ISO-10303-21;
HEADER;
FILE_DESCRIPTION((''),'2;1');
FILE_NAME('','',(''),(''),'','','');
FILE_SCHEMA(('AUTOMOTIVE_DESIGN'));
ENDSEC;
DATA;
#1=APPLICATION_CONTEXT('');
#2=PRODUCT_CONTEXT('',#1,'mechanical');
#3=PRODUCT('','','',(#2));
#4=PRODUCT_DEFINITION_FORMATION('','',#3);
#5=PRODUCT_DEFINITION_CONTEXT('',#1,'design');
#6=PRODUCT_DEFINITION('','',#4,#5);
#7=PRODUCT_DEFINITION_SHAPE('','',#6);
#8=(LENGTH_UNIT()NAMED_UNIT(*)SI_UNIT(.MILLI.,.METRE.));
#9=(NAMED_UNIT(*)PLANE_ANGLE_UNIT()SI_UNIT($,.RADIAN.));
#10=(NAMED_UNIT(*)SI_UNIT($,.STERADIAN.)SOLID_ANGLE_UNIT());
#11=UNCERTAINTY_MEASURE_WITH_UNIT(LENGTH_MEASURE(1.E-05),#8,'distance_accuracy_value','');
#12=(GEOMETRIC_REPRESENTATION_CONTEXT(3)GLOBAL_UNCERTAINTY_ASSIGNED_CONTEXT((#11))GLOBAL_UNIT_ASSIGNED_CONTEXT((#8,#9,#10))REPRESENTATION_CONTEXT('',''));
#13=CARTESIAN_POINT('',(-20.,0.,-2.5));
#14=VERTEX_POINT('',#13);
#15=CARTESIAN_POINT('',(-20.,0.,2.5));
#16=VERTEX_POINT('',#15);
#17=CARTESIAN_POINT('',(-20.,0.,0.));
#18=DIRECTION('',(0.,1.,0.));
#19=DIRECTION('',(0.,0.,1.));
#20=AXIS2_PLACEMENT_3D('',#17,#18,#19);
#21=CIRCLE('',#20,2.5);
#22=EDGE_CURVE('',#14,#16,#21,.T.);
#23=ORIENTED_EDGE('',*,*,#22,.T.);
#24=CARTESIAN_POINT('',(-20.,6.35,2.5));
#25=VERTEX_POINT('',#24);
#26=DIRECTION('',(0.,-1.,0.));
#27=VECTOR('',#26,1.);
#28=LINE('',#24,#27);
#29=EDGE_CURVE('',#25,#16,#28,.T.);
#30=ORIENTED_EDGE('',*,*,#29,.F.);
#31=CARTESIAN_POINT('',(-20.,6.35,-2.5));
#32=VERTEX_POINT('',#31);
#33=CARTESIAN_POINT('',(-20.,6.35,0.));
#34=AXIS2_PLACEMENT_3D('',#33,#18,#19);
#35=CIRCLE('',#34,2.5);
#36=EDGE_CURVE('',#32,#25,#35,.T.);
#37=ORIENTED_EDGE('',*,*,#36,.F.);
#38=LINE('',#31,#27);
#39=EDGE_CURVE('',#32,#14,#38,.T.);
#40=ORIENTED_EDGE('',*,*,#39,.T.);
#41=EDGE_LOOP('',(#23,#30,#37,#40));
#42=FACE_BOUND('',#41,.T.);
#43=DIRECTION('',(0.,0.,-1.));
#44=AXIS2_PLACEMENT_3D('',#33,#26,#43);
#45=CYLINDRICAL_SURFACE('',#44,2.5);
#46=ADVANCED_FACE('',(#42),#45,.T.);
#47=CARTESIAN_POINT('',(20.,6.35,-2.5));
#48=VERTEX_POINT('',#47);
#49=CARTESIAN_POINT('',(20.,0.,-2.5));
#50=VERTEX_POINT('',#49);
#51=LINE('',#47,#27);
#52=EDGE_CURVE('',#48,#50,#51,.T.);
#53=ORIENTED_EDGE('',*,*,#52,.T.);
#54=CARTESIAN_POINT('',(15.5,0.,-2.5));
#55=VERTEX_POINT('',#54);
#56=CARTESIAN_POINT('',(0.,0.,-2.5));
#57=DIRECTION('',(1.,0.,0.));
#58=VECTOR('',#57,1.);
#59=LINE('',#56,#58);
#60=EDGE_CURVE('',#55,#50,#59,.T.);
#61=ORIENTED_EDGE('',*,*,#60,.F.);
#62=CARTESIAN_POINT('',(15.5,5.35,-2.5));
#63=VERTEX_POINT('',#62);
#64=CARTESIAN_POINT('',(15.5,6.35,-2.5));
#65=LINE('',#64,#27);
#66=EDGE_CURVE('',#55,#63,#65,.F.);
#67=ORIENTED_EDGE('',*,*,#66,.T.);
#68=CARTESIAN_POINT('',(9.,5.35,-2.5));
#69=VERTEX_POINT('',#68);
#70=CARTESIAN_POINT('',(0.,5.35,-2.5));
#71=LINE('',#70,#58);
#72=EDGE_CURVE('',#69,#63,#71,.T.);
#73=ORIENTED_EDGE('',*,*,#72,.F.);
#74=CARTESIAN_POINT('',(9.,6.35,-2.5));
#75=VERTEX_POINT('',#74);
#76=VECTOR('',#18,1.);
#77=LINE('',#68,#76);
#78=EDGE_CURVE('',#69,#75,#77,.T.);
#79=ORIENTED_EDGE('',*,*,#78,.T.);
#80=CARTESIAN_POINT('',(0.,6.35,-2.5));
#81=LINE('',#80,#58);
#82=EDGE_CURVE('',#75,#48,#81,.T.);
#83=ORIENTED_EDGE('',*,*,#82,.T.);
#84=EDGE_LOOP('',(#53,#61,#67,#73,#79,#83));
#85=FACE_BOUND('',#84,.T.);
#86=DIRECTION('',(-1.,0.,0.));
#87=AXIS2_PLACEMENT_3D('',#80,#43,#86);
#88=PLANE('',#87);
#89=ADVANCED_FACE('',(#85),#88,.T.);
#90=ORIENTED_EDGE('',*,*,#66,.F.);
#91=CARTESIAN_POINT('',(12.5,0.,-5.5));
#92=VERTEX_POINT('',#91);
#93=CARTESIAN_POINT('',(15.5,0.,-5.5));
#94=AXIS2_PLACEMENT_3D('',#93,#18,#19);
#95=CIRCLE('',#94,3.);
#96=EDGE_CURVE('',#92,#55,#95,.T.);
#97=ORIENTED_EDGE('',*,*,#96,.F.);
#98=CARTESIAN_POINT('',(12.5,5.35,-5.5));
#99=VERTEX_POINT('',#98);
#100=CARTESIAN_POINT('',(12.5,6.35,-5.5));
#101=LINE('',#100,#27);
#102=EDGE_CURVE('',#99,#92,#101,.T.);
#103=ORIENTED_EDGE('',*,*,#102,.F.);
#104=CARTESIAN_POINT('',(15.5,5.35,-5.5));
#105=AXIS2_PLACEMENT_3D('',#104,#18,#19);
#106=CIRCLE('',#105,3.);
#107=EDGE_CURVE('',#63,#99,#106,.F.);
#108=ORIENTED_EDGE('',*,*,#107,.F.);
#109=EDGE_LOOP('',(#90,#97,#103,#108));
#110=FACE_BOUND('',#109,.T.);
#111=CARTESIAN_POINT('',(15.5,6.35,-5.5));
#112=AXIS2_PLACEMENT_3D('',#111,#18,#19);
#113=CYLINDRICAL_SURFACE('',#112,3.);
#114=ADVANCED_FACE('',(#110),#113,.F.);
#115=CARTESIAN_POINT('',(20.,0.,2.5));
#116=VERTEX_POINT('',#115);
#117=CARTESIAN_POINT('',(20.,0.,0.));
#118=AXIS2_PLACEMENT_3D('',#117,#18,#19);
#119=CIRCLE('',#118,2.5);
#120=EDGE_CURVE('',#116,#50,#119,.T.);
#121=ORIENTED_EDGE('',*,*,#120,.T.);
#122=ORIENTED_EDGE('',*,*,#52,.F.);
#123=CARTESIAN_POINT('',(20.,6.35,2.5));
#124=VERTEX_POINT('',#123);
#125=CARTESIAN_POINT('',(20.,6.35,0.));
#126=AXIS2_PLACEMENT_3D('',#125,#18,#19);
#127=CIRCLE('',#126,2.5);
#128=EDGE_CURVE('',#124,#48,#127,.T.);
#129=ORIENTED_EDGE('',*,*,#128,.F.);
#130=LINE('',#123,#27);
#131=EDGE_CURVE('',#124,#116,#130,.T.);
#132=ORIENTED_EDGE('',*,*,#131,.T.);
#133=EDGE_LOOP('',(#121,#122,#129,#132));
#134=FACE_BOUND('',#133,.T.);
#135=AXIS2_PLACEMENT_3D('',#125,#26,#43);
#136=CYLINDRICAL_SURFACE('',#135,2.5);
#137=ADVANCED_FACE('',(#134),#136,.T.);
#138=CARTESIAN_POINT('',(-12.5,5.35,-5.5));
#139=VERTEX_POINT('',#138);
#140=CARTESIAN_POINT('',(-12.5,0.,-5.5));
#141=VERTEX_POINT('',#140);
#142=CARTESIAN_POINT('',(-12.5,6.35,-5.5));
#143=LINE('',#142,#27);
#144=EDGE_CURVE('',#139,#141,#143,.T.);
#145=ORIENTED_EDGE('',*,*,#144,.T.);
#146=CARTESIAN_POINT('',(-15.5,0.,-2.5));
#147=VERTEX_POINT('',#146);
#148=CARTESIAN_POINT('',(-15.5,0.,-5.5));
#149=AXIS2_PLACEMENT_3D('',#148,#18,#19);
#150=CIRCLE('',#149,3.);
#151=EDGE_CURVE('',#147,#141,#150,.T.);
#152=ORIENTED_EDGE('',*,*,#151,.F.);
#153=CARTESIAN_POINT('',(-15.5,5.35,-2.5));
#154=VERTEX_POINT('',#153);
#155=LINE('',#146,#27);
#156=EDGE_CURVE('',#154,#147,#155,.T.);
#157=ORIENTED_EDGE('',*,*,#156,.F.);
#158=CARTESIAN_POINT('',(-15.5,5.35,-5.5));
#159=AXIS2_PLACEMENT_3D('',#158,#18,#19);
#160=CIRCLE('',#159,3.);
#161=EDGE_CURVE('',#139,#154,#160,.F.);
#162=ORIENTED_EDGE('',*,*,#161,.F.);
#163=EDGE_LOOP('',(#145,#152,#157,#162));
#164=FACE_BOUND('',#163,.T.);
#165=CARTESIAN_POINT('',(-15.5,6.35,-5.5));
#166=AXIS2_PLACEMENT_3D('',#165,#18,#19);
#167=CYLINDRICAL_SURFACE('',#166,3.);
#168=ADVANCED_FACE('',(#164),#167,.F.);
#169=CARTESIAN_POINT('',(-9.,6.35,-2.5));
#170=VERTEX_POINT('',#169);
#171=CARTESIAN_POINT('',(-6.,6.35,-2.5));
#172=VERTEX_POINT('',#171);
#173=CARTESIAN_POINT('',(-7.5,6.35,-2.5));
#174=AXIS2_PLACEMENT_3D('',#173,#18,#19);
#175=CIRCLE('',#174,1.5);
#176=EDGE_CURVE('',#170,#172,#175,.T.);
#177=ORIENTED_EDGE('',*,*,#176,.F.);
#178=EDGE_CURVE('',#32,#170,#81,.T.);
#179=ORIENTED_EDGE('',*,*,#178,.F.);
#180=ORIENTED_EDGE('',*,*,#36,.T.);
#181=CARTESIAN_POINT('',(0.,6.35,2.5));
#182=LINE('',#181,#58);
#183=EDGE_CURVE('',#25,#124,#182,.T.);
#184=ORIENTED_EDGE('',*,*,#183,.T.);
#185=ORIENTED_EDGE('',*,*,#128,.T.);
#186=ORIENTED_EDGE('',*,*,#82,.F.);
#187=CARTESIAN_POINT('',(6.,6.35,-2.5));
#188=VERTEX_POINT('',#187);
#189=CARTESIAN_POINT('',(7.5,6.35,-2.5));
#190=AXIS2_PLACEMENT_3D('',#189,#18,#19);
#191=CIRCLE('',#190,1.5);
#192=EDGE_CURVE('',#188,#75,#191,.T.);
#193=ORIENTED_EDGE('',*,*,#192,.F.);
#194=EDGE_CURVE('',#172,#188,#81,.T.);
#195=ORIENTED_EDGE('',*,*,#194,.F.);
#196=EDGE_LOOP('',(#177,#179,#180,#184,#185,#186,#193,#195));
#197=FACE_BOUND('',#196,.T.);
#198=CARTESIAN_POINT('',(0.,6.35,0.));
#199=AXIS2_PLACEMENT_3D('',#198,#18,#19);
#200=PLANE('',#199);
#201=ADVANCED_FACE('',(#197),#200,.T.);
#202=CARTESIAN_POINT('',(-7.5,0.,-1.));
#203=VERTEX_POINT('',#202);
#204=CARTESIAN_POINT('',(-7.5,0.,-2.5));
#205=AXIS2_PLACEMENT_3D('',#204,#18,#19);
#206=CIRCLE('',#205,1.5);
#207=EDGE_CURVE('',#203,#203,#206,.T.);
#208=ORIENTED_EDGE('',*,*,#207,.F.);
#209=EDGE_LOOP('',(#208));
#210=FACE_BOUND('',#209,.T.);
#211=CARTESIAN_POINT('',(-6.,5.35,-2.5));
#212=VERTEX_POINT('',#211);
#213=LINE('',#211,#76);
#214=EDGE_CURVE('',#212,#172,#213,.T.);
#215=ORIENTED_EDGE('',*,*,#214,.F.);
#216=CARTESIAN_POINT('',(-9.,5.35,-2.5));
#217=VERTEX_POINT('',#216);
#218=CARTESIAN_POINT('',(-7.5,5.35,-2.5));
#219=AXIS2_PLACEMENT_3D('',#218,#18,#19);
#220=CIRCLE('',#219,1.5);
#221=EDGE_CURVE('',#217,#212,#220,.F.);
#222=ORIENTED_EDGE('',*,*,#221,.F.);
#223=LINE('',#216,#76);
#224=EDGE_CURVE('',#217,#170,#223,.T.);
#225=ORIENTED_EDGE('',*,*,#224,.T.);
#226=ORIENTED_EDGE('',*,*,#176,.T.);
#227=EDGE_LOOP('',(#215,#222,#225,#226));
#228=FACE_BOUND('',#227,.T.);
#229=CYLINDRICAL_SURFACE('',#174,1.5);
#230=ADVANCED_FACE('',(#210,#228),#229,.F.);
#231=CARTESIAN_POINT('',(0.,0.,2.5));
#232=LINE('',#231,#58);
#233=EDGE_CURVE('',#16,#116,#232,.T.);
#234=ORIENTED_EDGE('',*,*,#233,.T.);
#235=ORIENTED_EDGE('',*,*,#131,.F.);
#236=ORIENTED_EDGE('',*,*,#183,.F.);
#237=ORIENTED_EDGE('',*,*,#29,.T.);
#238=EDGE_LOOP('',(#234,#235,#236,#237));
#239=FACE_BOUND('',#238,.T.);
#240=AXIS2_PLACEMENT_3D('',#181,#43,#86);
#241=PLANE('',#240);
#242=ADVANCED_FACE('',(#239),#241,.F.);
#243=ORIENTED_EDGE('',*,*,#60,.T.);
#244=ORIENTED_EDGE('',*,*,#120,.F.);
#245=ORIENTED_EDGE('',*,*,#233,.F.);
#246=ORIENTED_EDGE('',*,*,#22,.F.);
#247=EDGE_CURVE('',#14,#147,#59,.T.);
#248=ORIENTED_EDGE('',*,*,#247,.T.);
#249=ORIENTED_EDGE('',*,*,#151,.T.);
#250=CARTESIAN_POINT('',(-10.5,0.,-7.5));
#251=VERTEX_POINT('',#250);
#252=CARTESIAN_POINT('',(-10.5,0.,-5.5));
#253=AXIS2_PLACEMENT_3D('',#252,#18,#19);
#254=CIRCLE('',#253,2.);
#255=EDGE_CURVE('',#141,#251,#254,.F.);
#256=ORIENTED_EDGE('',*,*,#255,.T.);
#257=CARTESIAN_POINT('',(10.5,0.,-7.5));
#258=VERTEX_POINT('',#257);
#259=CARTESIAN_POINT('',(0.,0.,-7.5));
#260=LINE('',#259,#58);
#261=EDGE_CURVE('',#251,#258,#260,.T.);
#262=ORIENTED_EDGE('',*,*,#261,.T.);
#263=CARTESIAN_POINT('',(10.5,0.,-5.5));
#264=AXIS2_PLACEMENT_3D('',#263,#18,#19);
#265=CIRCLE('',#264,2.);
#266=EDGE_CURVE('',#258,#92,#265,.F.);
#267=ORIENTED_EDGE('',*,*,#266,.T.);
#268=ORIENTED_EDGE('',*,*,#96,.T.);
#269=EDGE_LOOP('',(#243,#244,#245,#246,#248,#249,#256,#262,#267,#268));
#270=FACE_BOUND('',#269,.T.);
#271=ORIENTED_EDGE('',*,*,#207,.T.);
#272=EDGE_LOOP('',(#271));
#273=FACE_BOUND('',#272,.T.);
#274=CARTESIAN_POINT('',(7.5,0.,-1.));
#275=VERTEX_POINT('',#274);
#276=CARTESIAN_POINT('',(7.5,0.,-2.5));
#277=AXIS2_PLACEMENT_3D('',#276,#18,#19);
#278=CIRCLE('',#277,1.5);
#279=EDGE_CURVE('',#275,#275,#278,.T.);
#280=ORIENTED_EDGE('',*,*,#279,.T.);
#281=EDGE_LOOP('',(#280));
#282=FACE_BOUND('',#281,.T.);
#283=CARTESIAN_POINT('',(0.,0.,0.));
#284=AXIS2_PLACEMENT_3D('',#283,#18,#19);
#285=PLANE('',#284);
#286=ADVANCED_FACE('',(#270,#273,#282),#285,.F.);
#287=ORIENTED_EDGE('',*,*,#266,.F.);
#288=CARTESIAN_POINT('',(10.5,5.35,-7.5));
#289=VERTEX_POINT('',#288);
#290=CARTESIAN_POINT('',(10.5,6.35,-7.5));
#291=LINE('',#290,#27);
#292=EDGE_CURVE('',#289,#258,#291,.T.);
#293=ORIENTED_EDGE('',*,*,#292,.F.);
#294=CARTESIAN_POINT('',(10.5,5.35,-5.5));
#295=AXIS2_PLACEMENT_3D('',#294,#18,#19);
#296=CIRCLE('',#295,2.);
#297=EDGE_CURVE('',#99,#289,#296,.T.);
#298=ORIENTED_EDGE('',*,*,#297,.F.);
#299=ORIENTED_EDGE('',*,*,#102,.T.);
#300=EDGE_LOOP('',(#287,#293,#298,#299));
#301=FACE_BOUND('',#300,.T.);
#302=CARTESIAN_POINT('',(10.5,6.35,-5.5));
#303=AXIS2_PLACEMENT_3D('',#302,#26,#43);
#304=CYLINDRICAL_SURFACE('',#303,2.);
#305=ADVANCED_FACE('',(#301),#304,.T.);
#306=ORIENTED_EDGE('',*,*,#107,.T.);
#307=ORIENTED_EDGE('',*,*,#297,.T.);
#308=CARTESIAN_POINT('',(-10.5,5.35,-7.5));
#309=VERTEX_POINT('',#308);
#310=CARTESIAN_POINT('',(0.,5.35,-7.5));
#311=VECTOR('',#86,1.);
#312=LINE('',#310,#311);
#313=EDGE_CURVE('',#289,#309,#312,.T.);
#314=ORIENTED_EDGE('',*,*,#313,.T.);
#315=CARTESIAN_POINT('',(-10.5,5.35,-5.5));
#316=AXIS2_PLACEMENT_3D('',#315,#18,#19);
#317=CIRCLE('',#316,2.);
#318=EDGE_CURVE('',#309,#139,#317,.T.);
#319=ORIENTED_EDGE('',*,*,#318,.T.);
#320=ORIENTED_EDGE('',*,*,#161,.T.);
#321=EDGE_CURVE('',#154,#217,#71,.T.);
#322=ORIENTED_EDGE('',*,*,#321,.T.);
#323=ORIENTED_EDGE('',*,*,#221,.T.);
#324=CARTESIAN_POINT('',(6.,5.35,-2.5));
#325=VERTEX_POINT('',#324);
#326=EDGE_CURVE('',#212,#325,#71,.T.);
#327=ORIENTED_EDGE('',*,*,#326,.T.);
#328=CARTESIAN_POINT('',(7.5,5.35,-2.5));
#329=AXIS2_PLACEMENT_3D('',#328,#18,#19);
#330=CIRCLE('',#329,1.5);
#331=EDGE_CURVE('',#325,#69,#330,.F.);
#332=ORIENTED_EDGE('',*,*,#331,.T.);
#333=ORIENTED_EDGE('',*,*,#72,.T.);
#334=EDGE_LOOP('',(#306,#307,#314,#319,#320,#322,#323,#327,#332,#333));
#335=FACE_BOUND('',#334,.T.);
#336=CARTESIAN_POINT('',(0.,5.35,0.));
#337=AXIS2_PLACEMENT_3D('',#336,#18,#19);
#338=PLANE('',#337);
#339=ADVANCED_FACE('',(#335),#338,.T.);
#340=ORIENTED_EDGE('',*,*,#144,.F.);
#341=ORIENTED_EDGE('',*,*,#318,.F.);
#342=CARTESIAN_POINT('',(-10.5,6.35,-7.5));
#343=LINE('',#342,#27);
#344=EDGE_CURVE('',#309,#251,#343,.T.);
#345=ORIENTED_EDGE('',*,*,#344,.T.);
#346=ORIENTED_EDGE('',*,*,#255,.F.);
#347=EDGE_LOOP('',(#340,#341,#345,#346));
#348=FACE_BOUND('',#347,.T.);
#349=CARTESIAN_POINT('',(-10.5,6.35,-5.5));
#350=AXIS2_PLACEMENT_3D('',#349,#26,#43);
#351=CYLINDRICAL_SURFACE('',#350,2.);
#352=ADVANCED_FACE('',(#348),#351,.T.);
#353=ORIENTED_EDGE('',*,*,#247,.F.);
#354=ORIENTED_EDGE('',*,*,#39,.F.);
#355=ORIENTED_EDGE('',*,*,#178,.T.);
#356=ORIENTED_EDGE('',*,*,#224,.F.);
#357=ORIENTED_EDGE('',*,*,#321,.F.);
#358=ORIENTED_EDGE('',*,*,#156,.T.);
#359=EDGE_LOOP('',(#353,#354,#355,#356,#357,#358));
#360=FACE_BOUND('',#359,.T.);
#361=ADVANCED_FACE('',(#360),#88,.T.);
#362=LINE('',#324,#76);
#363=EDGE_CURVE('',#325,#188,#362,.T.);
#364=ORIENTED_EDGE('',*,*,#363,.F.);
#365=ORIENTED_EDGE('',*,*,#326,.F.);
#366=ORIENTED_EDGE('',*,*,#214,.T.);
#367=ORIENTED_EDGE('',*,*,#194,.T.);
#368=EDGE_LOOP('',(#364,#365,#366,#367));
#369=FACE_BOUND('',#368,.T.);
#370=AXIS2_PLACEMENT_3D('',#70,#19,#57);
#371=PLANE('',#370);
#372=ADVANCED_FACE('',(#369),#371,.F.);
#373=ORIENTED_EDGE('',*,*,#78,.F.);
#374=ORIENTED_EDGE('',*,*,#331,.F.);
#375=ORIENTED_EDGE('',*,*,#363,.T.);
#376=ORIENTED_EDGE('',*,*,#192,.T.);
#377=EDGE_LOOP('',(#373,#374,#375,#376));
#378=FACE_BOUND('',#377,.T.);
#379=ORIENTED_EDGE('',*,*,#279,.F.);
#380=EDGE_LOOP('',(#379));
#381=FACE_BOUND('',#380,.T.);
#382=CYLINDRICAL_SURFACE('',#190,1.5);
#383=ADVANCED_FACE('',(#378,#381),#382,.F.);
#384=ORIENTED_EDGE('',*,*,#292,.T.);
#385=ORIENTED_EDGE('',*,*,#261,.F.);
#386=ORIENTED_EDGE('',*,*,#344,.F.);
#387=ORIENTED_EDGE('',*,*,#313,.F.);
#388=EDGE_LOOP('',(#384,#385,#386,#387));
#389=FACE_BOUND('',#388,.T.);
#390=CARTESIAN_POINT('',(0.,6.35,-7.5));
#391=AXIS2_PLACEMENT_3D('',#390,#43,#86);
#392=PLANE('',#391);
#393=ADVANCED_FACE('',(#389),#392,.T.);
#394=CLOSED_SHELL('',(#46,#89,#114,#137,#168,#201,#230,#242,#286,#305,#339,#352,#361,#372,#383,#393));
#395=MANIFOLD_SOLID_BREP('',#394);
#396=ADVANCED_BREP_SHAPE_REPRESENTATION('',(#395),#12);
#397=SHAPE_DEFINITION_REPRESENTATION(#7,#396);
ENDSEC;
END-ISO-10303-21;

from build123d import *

# Parameters (mm, degrees)
BOSS_EXTRUDE1_DEPTH         = 6.35
TAP_DRILL_FOR_M4X0_7_TAP1_D = 3
FILLET1_R                   = 3
CUT_EXTRUDE1_START          = -7.5
CUT_EXTRUDE1_OUTLINE_W      = 34
CUT_EXTRUDE1_OUTLINE_H      = 1
CUT_EXTRUDE1_DEPTH          = 5


# Read off the part's stored shape, not the designer's step: Cut-Extrude1
with BuildPart() as part:
    # Sketch1 → Boss-Extrude1 (new body)
    with BuildSketch(Plane(origin=(0, 0, 0), x_dir=(1, 0, 0), z_dir=(0, 1, 0))):
        with BuildLine():
            Line((-20, -2.5), (20, -2.5))
            ThreePointArc((20, -2.5), (22.5, 0), (20, 2.5))
            Line((20, 2.5), (-20, 2.5))
            ThreePointArc((-20, 2.5), (-22.5, 0), (-20, -2.5))
        make_face()
        with BuildLine():
            Line((-12.5, 5.5), (-12.5, 2.5))
            Line((-12.5, 2.5), (12.5, 2.5))
            Line((12.5, 2.5), (12.5, 5.5))
            ThreePointArc((12.5, 5.5), (11.914213562, 6.914213562), (10.5, 7.5))
            Line((10.5, 7.5), (-10.5, 7.5))
            ThreePointArc((-10.5, 7.5), (-11.914213562, 6.914213562), (-12.5, 5.5))
        make_face()
    extrude(amount=BOSS_EXTRUDE1_DEPTH)

    # Tap Drill for M4x0.7 Tap1 (through all)
    with Locations(Plane(origin=(0, 6.35, 0), x_dir=(1, 0, 0), z_dir=(0, 1, 0))):
        with Locations((-7.5, 2.5), (7.5, 2.5)):
            Hole(TAP_DRILL_FOR_M4X0_7_TAP1_D / 2)

    # Fillet1
    fillet1_edges = [part.edges().sort_by_distance(p)[0] for p in [
        (12.5, 3.175, -2.5),
        (-12.5, 3.175, -2.5),
    ]]
    fillet(fillet1_edges, radius=FILLET1_R - 0.0001)  # a hair under: the kernel refuses the full size

    # Cut-Extrude1 outline → Cut-Extrude1 (cut)
    with BuildSketch(Plane.XY.offset(CUT_EXTRUDE1_START)):
        with Locations((0, 5.85)):
            Rectangle(CUT_EXTRUDE1_OUTLINE_W, CUT_EXTRUDE1_OUTLINE_H)
    extrude(amount=CUT_EXTRUDE1_DEPTH, mode=Mode.SUBTRACT)


solid = part.part
